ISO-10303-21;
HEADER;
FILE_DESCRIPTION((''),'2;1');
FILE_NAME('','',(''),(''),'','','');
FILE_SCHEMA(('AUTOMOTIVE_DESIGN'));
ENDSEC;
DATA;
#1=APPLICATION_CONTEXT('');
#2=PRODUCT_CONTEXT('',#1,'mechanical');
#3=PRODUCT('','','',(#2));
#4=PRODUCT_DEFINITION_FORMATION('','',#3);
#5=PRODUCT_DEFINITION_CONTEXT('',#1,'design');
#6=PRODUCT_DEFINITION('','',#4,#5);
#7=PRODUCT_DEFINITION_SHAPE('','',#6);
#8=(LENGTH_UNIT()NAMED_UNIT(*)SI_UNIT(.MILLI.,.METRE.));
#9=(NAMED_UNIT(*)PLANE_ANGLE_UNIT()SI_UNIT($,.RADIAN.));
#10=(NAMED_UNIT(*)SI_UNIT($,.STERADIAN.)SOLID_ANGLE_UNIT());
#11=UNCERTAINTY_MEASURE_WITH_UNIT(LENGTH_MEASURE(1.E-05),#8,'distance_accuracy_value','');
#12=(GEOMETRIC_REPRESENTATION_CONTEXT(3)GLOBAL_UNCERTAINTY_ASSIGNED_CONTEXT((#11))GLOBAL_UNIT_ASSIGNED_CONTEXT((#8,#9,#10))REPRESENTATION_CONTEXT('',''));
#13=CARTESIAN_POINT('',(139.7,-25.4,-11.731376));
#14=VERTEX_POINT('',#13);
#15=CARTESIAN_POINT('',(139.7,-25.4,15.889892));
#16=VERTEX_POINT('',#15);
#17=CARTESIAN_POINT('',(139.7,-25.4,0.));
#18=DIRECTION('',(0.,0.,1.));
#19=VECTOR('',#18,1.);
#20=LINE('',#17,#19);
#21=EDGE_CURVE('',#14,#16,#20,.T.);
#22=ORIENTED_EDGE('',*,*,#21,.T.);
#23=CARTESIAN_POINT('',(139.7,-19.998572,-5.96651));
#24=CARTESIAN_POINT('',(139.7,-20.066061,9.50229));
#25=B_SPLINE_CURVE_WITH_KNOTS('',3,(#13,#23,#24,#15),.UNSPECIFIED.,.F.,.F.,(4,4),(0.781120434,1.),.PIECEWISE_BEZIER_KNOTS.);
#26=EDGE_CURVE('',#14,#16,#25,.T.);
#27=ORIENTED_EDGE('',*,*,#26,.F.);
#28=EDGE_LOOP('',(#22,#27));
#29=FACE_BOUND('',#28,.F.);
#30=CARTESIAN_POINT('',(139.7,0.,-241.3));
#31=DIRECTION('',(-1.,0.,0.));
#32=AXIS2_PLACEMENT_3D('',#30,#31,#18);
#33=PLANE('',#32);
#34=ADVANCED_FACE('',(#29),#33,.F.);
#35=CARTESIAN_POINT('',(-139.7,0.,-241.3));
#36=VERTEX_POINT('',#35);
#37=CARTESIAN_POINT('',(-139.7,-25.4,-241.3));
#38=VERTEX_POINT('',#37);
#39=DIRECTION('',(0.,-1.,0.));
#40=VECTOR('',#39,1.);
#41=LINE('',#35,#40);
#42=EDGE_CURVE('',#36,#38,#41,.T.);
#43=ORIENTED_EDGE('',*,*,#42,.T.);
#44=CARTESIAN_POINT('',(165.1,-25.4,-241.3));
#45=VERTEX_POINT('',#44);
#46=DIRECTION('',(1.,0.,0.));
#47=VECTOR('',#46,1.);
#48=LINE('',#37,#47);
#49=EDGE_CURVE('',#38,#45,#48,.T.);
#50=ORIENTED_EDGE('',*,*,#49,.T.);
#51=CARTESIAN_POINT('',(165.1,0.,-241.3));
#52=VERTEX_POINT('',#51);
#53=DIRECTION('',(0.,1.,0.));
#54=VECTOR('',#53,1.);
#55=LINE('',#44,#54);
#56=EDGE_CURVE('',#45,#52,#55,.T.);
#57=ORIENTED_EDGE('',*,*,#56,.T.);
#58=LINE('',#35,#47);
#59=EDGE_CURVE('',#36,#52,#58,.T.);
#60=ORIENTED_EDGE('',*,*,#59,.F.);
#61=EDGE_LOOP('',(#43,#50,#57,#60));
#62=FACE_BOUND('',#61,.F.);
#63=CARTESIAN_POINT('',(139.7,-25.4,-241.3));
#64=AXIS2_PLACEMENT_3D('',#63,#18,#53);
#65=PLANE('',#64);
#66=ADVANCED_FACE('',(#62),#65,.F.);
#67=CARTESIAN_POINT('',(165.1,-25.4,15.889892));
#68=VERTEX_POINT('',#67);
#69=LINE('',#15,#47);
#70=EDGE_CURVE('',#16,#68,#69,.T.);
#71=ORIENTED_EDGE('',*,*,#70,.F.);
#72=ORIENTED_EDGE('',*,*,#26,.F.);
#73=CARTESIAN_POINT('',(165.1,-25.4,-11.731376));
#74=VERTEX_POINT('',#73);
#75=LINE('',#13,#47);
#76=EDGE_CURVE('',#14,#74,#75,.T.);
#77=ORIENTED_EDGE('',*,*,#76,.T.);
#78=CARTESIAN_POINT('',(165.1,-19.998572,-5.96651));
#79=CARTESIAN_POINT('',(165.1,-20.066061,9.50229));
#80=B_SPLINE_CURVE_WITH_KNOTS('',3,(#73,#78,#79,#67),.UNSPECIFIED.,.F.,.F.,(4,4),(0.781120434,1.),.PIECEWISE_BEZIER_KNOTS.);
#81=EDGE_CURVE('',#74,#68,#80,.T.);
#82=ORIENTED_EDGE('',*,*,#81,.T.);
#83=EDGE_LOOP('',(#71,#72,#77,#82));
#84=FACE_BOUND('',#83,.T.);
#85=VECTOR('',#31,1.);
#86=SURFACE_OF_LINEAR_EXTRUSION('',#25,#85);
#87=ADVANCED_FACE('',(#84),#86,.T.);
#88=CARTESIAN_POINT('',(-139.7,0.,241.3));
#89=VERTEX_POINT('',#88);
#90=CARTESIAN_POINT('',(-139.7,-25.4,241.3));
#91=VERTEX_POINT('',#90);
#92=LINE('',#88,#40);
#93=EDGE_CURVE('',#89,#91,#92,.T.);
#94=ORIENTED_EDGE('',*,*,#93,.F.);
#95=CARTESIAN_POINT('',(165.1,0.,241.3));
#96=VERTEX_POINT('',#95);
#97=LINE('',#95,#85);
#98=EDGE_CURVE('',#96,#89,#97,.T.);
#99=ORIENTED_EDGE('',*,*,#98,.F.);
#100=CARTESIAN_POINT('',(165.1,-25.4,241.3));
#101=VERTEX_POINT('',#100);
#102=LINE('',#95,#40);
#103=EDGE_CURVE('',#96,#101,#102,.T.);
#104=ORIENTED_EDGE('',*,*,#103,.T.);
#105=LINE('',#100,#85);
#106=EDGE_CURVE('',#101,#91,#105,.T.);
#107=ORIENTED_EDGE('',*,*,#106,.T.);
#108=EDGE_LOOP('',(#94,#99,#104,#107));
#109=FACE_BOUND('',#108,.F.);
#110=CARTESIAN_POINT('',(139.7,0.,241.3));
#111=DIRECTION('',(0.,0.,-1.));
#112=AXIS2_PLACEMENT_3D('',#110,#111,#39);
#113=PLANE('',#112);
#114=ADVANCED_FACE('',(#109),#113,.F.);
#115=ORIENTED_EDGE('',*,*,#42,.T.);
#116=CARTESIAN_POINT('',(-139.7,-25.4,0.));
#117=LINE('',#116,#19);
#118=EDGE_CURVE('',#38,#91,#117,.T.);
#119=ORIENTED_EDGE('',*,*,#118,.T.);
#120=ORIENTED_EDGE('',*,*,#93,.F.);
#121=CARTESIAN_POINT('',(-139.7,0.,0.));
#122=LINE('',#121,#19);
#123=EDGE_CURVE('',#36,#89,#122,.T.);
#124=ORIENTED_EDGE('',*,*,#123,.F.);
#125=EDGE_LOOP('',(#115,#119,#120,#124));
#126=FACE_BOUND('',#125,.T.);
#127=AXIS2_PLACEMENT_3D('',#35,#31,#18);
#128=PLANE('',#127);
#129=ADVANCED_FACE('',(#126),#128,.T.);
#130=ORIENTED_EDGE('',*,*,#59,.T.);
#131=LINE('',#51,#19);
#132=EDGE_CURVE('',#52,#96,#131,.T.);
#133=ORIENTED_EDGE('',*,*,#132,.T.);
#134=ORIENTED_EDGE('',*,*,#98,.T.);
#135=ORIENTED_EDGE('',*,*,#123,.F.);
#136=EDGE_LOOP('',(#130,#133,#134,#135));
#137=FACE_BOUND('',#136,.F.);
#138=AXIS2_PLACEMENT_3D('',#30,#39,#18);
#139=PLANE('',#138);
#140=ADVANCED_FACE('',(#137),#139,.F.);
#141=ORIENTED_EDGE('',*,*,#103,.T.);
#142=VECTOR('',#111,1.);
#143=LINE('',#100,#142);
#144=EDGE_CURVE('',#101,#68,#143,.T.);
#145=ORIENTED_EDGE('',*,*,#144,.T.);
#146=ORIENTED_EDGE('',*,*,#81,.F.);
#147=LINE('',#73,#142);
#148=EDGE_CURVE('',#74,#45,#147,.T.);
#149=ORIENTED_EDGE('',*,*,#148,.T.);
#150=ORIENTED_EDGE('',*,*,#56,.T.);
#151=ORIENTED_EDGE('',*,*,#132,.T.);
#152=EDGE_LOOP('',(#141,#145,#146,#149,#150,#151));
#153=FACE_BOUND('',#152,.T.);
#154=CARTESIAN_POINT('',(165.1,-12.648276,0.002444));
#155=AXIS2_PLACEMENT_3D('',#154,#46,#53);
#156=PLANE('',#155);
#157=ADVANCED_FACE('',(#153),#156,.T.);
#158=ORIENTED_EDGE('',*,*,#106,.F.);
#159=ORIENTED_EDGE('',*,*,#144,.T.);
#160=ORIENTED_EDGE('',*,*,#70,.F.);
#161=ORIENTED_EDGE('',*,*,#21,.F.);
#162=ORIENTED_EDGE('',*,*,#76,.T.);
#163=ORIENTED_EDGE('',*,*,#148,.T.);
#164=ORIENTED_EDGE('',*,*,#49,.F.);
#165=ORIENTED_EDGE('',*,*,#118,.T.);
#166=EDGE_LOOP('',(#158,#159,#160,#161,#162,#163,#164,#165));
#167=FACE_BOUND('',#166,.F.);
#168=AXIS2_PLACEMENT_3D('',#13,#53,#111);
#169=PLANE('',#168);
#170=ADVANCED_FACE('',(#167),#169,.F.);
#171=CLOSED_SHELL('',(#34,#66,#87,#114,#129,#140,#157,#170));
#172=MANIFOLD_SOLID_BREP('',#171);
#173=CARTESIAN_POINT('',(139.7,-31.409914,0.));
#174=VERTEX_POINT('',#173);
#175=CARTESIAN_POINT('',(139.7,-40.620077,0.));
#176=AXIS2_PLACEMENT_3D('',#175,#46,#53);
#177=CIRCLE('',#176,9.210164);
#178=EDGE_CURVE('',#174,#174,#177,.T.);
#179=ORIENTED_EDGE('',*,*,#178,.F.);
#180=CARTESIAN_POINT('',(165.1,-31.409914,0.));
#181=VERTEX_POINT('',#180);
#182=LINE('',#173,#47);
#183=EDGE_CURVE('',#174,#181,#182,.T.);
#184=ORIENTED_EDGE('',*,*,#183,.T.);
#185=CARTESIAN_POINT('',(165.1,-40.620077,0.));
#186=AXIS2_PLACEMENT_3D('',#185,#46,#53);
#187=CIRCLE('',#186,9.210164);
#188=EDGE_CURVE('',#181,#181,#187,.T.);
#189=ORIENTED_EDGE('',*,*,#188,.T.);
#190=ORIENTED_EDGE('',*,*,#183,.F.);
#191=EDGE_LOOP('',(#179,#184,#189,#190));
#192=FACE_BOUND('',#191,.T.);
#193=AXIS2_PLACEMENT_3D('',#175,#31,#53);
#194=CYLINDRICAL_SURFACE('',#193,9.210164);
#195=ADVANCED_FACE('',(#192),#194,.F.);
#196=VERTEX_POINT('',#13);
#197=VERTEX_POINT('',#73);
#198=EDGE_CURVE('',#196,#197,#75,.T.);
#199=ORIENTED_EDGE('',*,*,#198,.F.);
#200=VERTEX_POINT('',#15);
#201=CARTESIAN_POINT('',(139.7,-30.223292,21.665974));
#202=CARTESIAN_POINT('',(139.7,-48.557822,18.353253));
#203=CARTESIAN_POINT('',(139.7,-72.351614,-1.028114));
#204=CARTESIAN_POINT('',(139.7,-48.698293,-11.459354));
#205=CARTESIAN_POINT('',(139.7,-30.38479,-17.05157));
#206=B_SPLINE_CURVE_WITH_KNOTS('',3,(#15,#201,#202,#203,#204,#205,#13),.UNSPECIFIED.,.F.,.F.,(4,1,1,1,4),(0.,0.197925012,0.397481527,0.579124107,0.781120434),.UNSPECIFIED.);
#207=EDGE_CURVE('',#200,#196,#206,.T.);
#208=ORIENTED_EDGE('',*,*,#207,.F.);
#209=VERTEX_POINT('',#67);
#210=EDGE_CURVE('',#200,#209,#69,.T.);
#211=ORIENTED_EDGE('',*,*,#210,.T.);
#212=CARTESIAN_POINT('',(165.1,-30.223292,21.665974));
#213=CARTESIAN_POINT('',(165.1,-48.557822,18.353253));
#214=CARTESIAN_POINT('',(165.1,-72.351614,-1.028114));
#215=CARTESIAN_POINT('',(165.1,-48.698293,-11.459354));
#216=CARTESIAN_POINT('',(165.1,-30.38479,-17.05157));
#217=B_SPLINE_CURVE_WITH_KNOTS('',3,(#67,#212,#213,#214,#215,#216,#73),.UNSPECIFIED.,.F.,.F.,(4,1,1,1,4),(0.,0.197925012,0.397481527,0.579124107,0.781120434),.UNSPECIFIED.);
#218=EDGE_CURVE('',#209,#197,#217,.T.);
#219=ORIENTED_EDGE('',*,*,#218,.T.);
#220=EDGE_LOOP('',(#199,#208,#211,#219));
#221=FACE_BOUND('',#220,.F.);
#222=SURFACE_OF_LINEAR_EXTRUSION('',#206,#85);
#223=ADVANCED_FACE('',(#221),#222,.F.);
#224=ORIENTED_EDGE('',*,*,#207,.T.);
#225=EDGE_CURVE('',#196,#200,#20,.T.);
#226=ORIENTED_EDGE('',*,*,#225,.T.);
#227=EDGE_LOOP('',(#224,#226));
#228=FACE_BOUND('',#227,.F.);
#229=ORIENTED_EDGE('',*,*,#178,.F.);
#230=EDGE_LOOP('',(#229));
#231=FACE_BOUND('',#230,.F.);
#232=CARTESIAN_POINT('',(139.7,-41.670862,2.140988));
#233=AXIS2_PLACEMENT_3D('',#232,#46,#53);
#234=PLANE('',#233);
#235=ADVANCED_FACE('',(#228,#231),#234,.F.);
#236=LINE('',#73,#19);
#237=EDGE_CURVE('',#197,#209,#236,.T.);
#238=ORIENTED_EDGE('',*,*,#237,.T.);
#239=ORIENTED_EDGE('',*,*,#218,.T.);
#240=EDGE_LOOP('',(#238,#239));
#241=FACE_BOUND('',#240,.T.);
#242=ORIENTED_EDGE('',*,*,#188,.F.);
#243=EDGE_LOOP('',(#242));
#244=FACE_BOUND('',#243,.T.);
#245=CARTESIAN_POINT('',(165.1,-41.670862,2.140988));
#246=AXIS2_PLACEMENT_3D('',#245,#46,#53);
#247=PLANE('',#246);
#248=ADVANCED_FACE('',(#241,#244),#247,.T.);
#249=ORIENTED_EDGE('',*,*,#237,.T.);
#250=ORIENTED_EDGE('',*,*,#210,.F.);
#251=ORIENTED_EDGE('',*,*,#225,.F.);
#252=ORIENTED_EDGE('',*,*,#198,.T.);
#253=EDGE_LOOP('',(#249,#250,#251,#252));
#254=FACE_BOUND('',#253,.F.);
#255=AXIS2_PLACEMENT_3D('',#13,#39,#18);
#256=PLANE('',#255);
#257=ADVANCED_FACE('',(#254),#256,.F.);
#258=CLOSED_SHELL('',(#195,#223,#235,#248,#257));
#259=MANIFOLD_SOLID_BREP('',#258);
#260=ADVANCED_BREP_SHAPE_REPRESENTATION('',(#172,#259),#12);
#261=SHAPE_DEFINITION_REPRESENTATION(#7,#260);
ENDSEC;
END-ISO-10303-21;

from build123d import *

# Parameters (mm, degrees)
F0_W     = 279.4
F0_H     = 482.6
F1_DEPTH = 25.4
F2_R     = 9.2101636832
F3_DEPTH = 25.4


with BuildPart() as f1:
    # F0 (on Front) → F1 (new body)
    with BuildSketch(Plane.XZ):
        Rectangle(F0_W, F0_H)
    extrude(amount=F1_DEPTH)

    # F2 (on face) → F3 (join)
    with BuildSketch(Plane.YZ.offset(139.7)):
        with BuildLine():
            Line((-25.4, -11.7313759401), (-25.4, 15.8898923546))
            add(Edge.make_bspline(
                [(-25.4, 15.8898923546), (-30.2232915007, 21.6659738224), (-48.5578217968, 18.3532526749), (-72.3516137088, -1.0281140256), (-48.6982925667, -11.4593535624), (-30.3847897858, -17.051569857), (-25.4, -11.7313759401)],
                knots=[0, 0, 0, 0, 0.1979250123, 0.3974815266, 0.5791241072, 0.7811204339, 0.7811204339, 0.7811204339, 0.7811204339], degree=3))
        make_face()
        with Locations((-40.6200774014, 0)):
            Circle(F2_R, mode=Mode.SUBTRACT)
        with BuildLine():
            Line((-25.4, 241.3), (-25.4, 15.8898923546))
            add(Edge.make_bspline(
                [(-25.4, -11.7313759401), (-19.9985719489, -5.9665100391), (-20.0660609566, 9.5022903499), (-25.4, 15.8898923546)],
                knots=[0.7811204339, 0.7811204339, 0.7811204339, 0.7811204339, 1, 1, 1, 1], degree=3))
            Line((-25.4, -11.7313759401), (-25.4, -241.3))
            Line((-25.4, -241.3), (0, -241.3))
            Line((0, -241.3), (0, 241.3))
            Line((0, 241.3), (-25.4, 241.3))
        make_face()
    extrude(amount=F3_DEPTH)


solid = f1.part
